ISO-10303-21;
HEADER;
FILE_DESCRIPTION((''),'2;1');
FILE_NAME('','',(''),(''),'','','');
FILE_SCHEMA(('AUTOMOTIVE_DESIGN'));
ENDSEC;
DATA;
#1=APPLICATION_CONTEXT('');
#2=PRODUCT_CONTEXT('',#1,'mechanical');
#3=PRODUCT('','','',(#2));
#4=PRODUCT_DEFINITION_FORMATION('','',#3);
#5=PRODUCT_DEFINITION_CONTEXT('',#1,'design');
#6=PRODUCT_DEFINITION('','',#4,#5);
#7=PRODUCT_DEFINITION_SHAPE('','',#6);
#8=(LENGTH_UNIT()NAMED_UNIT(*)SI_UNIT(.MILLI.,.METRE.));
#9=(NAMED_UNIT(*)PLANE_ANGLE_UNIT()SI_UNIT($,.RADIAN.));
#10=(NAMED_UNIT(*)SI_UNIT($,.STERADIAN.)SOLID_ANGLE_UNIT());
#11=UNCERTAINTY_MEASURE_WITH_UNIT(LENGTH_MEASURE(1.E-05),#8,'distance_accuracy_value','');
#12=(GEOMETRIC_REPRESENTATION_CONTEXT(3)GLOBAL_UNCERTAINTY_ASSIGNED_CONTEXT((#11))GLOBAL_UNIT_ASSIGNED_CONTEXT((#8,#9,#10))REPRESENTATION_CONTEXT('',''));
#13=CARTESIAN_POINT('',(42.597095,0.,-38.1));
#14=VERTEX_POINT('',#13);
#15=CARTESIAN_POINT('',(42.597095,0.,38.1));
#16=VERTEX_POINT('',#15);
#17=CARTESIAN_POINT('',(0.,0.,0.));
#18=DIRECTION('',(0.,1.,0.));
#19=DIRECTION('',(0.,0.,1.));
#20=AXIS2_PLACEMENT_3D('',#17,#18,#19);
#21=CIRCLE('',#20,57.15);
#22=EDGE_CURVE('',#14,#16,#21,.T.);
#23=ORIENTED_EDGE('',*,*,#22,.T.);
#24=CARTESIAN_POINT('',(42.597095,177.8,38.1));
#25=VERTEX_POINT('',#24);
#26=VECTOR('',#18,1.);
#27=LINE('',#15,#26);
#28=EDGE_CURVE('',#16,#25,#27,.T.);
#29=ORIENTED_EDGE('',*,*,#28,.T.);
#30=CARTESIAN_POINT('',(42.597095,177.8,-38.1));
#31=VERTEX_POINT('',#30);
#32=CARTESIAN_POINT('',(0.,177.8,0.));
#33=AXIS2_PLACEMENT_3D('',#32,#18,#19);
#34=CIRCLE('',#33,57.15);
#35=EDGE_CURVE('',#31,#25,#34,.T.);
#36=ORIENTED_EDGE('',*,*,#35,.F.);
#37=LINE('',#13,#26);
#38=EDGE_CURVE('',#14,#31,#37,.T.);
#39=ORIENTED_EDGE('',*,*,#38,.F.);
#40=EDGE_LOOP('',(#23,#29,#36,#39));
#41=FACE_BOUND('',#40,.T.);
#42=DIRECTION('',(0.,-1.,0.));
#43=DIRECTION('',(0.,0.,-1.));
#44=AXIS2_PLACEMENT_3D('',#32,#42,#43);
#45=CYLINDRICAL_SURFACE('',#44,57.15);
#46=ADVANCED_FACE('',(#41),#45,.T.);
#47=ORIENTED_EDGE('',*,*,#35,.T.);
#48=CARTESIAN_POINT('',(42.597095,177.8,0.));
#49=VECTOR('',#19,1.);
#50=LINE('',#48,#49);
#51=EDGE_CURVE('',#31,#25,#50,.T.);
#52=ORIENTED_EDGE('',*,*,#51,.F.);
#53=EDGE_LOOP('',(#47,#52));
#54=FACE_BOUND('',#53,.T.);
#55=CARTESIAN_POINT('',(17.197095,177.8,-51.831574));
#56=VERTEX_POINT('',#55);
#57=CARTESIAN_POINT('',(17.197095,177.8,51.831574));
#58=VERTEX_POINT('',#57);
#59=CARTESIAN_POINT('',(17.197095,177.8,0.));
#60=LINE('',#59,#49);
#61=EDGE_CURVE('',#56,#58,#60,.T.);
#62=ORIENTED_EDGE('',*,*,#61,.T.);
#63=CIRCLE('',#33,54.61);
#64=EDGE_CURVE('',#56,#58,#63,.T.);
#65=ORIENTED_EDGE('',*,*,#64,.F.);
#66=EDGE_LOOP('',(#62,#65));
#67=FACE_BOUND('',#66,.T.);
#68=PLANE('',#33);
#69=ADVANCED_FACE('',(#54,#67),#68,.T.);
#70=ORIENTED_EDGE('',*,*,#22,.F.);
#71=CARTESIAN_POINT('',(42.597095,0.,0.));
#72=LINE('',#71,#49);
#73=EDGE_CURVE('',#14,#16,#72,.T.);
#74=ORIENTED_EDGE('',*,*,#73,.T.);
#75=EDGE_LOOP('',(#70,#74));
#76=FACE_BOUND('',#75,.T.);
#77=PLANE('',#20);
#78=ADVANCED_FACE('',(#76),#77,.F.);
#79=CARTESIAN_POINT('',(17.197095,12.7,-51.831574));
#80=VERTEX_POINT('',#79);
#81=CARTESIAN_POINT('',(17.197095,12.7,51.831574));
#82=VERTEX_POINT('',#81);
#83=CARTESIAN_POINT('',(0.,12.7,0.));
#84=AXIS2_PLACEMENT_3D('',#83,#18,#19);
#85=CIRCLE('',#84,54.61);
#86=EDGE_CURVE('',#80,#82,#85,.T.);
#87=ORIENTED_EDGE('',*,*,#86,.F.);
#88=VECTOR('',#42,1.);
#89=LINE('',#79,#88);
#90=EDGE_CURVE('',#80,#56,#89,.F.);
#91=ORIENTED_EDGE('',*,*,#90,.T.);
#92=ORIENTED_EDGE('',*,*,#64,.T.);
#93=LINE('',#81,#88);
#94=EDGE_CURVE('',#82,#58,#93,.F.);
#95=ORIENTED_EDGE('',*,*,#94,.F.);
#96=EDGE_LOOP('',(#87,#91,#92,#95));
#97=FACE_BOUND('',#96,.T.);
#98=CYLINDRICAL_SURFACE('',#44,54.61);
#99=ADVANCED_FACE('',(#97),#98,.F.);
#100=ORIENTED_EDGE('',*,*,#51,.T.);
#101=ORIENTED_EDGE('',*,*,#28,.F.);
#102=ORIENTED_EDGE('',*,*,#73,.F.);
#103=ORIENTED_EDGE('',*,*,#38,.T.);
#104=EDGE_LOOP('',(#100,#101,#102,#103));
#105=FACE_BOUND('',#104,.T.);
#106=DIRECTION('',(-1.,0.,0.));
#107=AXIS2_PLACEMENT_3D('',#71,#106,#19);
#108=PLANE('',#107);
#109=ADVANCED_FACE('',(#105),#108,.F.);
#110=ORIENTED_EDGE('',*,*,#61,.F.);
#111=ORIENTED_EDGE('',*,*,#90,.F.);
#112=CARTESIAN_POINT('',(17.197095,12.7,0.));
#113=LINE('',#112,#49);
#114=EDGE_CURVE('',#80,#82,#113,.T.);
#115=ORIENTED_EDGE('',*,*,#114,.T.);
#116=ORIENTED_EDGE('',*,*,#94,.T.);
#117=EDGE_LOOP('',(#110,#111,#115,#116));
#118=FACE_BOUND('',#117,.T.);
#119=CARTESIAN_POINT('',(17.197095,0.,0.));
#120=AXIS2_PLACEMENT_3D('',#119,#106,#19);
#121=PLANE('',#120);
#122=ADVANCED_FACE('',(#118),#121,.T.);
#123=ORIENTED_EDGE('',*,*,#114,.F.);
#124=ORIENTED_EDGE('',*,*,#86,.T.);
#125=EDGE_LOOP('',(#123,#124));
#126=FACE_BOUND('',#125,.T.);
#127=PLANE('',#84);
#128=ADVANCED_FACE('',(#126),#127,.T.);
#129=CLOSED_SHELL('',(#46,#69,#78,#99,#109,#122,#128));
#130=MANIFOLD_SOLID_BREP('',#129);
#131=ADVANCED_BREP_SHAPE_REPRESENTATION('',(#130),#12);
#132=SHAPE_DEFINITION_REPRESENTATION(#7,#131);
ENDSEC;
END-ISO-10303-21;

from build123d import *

# Parameters (mm, degrees)
SKETCH1_R           = 57.15
BOSS_EXTRUDE1_DEPTH = 177.8
CUT_EXTRUDE1_DEPTH  = 196.30766754
SHELL1_START        = 12.7
SHELL1_DEPTH        = 165.1


# Read off the part's stored shape, not the designer's step: Shell1
with BuildPart() as part:
    # Sketch1 → Boss-Extrude1 (new body)
    with BuildSketch(Plane(origin=(0, 0, 0), x_dir=(1, 0, 0), z_dir=(0, 1, 0))):
        with Locations(Location((0, 0, 0), (0, 0, 270))):
            Circle(SKETCH1_R)
    extrude(amount=BOSS_EXTRUDE1_DEPTH)

    # Sketch2 → Cut-Extrude1 (cut, through all)
    with BuildSketch(Plane(origin=(0, 177.8, 0), x_dir=(1, 0, 0), z_dir=(0, 1, 0))):
        Polygon((42.597094971, 323.940863218), (42.597094971, 38.1), (42.597094971, -38.1), (42.597094971, -323.940863218), (614.278821408, -323.940863218), (614.278821408, 323.940863218), align=None)
    extrude(amount=-CUT_EXTRUDE1_DEPTH, mode=Mode.SUBTRACT)

    # Shell1 outline → Shell1 (cut)
    with BuildSketch(Plane(origin=(0, 0, 0), x_dir=(1, 0, 0), z_dir=(0, 1, 0)).offset(SHELL1_START)):
        with BuildLine():
            ThreePointArc((17.197094971, 51.831573626), (-54.61, 0), (17.197094971, -51.831573626))
            Line((17.197094971, -51.831573626), (17.197094971, 51.831573626))
        make_face()
    extrude(amount=SHELL1_DEPTH, mode=Mode.SUBTRACT)


solid = part.part
